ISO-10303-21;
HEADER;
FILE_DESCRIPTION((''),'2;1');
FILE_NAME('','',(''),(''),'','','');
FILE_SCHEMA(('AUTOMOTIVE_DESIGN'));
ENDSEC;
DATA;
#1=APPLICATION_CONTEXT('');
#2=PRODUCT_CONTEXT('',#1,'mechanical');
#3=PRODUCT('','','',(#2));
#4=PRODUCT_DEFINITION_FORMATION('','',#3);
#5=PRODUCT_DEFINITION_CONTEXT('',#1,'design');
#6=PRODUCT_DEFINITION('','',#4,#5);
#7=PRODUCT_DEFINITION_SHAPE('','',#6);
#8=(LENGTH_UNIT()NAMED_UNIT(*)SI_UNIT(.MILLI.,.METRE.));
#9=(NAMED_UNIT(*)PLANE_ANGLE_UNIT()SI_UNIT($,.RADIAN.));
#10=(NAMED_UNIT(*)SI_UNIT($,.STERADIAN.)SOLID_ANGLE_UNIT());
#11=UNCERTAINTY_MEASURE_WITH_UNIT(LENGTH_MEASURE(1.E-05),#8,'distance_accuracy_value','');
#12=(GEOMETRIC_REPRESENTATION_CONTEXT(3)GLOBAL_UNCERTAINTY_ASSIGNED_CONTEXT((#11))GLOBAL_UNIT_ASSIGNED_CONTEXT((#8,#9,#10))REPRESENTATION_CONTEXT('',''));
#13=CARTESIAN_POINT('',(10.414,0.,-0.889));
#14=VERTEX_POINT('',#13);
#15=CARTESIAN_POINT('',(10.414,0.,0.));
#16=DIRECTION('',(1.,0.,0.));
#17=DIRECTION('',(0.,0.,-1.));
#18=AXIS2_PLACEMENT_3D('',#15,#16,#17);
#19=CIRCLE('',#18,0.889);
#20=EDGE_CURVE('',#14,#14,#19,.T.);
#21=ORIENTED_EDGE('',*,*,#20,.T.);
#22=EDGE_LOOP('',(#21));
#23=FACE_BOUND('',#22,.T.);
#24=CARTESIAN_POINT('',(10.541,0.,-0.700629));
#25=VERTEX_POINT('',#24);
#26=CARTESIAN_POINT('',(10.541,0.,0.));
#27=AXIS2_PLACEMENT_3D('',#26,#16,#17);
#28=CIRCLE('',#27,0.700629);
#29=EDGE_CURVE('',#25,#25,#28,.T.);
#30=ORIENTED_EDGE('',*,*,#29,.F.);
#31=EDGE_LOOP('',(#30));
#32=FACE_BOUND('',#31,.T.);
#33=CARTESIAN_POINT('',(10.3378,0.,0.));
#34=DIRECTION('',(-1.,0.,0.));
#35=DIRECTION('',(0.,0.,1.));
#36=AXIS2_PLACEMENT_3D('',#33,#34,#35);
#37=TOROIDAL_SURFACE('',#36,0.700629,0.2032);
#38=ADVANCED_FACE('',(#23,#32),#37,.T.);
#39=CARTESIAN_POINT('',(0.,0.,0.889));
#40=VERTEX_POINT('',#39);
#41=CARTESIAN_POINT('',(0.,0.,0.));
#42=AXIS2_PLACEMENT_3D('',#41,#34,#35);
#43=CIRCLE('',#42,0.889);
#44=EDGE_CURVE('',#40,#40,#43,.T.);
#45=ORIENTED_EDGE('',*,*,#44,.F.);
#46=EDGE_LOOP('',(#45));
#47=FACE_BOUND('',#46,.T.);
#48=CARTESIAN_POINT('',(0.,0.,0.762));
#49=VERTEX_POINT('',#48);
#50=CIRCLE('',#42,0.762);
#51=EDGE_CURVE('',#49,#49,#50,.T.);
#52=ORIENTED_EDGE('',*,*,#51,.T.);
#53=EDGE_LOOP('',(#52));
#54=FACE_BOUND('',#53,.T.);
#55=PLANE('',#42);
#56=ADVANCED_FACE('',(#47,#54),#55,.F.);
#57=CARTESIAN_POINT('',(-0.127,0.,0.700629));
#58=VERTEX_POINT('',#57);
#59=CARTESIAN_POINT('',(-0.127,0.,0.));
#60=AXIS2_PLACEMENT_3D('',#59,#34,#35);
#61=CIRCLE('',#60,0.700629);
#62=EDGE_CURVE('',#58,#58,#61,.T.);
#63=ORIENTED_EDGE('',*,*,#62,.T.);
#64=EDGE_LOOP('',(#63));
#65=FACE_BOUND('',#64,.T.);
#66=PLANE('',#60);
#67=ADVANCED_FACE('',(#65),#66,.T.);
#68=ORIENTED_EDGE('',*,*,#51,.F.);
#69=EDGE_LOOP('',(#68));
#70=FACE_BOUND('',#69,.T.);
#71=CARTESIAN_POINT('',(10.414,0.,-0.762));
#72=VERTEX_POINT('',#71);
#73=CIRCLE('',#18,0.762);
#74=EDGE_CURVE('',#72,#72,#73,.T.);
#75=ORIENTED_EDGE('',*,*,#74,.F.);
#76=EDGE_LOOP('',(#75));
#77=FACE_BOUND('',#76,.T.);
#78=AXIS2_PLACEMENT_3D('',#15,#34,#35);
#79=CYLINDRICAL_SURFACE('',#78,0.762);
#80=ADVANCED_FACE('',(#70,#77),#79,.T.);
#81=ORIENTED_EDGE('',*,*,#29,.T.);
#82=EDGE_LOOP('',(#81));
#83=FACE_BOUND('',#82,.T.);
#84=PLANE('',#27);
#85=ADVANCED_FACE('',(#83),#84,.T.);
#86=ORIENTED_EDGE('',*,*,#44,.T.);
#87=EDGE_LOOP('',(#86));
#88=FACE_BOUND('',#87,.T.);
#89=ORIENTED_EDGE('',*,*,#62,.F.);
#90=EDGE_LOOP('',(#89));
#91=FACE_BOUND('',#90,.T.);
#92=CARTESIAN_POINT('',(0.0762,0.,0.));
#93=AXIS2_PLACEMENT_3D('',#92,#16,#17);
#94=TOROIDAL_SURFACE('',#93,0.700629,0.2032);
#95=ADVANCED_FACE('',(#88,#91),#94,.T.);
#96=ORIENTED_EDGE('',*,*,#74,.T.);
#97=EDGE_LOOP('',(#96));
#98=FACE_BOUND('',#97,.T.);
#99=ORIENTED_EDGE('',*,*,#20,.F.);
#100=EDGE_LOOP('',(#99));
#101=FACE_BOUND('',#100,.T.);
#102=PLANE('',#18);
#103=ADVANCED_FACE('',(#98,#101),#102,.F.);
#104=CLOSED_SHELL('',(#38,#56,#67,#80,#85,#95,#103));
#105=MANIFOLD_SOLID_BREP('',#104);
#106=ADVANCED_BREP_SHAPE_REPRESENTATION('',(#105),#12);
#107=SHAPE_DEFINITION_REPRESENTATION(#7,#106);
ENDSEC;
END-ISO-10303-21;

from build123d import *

# Parameters (mm, degrees)
SKETCH1_R      = 0.762
EXTRUDE1_DEPTH = 10.414
SKETCH2_R      = 0.889
EXTRUDE2_DEPTH = 0.127
EXTRUDE3_START = 0.127
SKETCH3_R      = 0.889
EXTRUDE3_DEPTH = 0.127
FILLET1_R      = 0.2032


with BuildPart() as part:
    # Sketch1 → Extrude1 (new body)
    with BuildSketch(Plane(origin=(0, 0, 0), x_dir=(0, 0, -1), z_dir=(1, 0, 0))):
        Circle(SKETCH1_R)
    extrude(amount=EXTRUDE1_DEPTH)

    # Sketch2 → Extrude2 (add)
    with BuildSketch(Plane(origin=(10.414, 0, 0), x_dir=(0, 0, -1), z_dir=(1, 0, 0))):
        Circle(SKETCH2_R)
    extrude(amount=EXTRUDE2_DEPTH)

    # Sketch3 → Extrude3 (add)
    with BuildSketch(Plane.ZY.offset(EXTRUDE3_START)):
        with Locations(Location((0, 0, 0), (0, 0, 180))):
            Circle(SKETCH3_R)
    extrude(amount=-EXTRUDE3_DEPTH)

    # Fillet1
    # the kernel refuses this fillet: 0.2032 mm, written as the material it takes off along each edge
    with BuildSketch(Plane(origin=(10.541, 0, 0), x_dir=(0, 0, -1), z_dir=(0, -1, 0))) as fillet1_piece_1:
        with BuildLine():
            CenterArc((0.700628558, -0.2032), FILLET1_R, 22.024312837, 67.975687163)
            Line((0.700628558, 0), (0.700628558, 0.004064))
            Line((0.700628558, 0.004064), (0.889, 0.004064))
            Line((0.889, 0.004064), (0.893064, 0))
            ThreePointArc((0.893064, 0), (0.893064, -0.0635), (0.892767429, -0.125476))
            Line((0.892767429, -0.125476), (0.889, -0.127))
        make_face()
    revolve(axis=Axis((10.541, 0, 0), (1, 0, 0)), mode=Mode.SUBTRACT)
    with BuildSketch(Plane(origin=(-0.127, 0, 0), x_dir=(0, 0, -1), z_dir=(0, 1, 0))) as fillet1_piece_2:
        with BuildLine():
            CenterArc((0.700628558, -0.2032), FILLET1_R, 22.024312837, 67.975687163)
            Line((0.700628558, 0), (0.700628558, 0.004064))
            Line((0.700628558, 0.004064), (0.889, 0.004064))
            Line((0.889, 0.004064), (0.893064, 0))
            ThreePointArc((0.893064, 0), (0.893064, -0.0635), (0.892767429, -0.125476))
            Line((0.892767429, -0.125476), (0.889, -0.127))
        make_face()
    revolve(axis=Axis((-0.127, 0, 0), (-1, 0, 0)), mode=Mode.SUBTRACT)


solid = part.part
